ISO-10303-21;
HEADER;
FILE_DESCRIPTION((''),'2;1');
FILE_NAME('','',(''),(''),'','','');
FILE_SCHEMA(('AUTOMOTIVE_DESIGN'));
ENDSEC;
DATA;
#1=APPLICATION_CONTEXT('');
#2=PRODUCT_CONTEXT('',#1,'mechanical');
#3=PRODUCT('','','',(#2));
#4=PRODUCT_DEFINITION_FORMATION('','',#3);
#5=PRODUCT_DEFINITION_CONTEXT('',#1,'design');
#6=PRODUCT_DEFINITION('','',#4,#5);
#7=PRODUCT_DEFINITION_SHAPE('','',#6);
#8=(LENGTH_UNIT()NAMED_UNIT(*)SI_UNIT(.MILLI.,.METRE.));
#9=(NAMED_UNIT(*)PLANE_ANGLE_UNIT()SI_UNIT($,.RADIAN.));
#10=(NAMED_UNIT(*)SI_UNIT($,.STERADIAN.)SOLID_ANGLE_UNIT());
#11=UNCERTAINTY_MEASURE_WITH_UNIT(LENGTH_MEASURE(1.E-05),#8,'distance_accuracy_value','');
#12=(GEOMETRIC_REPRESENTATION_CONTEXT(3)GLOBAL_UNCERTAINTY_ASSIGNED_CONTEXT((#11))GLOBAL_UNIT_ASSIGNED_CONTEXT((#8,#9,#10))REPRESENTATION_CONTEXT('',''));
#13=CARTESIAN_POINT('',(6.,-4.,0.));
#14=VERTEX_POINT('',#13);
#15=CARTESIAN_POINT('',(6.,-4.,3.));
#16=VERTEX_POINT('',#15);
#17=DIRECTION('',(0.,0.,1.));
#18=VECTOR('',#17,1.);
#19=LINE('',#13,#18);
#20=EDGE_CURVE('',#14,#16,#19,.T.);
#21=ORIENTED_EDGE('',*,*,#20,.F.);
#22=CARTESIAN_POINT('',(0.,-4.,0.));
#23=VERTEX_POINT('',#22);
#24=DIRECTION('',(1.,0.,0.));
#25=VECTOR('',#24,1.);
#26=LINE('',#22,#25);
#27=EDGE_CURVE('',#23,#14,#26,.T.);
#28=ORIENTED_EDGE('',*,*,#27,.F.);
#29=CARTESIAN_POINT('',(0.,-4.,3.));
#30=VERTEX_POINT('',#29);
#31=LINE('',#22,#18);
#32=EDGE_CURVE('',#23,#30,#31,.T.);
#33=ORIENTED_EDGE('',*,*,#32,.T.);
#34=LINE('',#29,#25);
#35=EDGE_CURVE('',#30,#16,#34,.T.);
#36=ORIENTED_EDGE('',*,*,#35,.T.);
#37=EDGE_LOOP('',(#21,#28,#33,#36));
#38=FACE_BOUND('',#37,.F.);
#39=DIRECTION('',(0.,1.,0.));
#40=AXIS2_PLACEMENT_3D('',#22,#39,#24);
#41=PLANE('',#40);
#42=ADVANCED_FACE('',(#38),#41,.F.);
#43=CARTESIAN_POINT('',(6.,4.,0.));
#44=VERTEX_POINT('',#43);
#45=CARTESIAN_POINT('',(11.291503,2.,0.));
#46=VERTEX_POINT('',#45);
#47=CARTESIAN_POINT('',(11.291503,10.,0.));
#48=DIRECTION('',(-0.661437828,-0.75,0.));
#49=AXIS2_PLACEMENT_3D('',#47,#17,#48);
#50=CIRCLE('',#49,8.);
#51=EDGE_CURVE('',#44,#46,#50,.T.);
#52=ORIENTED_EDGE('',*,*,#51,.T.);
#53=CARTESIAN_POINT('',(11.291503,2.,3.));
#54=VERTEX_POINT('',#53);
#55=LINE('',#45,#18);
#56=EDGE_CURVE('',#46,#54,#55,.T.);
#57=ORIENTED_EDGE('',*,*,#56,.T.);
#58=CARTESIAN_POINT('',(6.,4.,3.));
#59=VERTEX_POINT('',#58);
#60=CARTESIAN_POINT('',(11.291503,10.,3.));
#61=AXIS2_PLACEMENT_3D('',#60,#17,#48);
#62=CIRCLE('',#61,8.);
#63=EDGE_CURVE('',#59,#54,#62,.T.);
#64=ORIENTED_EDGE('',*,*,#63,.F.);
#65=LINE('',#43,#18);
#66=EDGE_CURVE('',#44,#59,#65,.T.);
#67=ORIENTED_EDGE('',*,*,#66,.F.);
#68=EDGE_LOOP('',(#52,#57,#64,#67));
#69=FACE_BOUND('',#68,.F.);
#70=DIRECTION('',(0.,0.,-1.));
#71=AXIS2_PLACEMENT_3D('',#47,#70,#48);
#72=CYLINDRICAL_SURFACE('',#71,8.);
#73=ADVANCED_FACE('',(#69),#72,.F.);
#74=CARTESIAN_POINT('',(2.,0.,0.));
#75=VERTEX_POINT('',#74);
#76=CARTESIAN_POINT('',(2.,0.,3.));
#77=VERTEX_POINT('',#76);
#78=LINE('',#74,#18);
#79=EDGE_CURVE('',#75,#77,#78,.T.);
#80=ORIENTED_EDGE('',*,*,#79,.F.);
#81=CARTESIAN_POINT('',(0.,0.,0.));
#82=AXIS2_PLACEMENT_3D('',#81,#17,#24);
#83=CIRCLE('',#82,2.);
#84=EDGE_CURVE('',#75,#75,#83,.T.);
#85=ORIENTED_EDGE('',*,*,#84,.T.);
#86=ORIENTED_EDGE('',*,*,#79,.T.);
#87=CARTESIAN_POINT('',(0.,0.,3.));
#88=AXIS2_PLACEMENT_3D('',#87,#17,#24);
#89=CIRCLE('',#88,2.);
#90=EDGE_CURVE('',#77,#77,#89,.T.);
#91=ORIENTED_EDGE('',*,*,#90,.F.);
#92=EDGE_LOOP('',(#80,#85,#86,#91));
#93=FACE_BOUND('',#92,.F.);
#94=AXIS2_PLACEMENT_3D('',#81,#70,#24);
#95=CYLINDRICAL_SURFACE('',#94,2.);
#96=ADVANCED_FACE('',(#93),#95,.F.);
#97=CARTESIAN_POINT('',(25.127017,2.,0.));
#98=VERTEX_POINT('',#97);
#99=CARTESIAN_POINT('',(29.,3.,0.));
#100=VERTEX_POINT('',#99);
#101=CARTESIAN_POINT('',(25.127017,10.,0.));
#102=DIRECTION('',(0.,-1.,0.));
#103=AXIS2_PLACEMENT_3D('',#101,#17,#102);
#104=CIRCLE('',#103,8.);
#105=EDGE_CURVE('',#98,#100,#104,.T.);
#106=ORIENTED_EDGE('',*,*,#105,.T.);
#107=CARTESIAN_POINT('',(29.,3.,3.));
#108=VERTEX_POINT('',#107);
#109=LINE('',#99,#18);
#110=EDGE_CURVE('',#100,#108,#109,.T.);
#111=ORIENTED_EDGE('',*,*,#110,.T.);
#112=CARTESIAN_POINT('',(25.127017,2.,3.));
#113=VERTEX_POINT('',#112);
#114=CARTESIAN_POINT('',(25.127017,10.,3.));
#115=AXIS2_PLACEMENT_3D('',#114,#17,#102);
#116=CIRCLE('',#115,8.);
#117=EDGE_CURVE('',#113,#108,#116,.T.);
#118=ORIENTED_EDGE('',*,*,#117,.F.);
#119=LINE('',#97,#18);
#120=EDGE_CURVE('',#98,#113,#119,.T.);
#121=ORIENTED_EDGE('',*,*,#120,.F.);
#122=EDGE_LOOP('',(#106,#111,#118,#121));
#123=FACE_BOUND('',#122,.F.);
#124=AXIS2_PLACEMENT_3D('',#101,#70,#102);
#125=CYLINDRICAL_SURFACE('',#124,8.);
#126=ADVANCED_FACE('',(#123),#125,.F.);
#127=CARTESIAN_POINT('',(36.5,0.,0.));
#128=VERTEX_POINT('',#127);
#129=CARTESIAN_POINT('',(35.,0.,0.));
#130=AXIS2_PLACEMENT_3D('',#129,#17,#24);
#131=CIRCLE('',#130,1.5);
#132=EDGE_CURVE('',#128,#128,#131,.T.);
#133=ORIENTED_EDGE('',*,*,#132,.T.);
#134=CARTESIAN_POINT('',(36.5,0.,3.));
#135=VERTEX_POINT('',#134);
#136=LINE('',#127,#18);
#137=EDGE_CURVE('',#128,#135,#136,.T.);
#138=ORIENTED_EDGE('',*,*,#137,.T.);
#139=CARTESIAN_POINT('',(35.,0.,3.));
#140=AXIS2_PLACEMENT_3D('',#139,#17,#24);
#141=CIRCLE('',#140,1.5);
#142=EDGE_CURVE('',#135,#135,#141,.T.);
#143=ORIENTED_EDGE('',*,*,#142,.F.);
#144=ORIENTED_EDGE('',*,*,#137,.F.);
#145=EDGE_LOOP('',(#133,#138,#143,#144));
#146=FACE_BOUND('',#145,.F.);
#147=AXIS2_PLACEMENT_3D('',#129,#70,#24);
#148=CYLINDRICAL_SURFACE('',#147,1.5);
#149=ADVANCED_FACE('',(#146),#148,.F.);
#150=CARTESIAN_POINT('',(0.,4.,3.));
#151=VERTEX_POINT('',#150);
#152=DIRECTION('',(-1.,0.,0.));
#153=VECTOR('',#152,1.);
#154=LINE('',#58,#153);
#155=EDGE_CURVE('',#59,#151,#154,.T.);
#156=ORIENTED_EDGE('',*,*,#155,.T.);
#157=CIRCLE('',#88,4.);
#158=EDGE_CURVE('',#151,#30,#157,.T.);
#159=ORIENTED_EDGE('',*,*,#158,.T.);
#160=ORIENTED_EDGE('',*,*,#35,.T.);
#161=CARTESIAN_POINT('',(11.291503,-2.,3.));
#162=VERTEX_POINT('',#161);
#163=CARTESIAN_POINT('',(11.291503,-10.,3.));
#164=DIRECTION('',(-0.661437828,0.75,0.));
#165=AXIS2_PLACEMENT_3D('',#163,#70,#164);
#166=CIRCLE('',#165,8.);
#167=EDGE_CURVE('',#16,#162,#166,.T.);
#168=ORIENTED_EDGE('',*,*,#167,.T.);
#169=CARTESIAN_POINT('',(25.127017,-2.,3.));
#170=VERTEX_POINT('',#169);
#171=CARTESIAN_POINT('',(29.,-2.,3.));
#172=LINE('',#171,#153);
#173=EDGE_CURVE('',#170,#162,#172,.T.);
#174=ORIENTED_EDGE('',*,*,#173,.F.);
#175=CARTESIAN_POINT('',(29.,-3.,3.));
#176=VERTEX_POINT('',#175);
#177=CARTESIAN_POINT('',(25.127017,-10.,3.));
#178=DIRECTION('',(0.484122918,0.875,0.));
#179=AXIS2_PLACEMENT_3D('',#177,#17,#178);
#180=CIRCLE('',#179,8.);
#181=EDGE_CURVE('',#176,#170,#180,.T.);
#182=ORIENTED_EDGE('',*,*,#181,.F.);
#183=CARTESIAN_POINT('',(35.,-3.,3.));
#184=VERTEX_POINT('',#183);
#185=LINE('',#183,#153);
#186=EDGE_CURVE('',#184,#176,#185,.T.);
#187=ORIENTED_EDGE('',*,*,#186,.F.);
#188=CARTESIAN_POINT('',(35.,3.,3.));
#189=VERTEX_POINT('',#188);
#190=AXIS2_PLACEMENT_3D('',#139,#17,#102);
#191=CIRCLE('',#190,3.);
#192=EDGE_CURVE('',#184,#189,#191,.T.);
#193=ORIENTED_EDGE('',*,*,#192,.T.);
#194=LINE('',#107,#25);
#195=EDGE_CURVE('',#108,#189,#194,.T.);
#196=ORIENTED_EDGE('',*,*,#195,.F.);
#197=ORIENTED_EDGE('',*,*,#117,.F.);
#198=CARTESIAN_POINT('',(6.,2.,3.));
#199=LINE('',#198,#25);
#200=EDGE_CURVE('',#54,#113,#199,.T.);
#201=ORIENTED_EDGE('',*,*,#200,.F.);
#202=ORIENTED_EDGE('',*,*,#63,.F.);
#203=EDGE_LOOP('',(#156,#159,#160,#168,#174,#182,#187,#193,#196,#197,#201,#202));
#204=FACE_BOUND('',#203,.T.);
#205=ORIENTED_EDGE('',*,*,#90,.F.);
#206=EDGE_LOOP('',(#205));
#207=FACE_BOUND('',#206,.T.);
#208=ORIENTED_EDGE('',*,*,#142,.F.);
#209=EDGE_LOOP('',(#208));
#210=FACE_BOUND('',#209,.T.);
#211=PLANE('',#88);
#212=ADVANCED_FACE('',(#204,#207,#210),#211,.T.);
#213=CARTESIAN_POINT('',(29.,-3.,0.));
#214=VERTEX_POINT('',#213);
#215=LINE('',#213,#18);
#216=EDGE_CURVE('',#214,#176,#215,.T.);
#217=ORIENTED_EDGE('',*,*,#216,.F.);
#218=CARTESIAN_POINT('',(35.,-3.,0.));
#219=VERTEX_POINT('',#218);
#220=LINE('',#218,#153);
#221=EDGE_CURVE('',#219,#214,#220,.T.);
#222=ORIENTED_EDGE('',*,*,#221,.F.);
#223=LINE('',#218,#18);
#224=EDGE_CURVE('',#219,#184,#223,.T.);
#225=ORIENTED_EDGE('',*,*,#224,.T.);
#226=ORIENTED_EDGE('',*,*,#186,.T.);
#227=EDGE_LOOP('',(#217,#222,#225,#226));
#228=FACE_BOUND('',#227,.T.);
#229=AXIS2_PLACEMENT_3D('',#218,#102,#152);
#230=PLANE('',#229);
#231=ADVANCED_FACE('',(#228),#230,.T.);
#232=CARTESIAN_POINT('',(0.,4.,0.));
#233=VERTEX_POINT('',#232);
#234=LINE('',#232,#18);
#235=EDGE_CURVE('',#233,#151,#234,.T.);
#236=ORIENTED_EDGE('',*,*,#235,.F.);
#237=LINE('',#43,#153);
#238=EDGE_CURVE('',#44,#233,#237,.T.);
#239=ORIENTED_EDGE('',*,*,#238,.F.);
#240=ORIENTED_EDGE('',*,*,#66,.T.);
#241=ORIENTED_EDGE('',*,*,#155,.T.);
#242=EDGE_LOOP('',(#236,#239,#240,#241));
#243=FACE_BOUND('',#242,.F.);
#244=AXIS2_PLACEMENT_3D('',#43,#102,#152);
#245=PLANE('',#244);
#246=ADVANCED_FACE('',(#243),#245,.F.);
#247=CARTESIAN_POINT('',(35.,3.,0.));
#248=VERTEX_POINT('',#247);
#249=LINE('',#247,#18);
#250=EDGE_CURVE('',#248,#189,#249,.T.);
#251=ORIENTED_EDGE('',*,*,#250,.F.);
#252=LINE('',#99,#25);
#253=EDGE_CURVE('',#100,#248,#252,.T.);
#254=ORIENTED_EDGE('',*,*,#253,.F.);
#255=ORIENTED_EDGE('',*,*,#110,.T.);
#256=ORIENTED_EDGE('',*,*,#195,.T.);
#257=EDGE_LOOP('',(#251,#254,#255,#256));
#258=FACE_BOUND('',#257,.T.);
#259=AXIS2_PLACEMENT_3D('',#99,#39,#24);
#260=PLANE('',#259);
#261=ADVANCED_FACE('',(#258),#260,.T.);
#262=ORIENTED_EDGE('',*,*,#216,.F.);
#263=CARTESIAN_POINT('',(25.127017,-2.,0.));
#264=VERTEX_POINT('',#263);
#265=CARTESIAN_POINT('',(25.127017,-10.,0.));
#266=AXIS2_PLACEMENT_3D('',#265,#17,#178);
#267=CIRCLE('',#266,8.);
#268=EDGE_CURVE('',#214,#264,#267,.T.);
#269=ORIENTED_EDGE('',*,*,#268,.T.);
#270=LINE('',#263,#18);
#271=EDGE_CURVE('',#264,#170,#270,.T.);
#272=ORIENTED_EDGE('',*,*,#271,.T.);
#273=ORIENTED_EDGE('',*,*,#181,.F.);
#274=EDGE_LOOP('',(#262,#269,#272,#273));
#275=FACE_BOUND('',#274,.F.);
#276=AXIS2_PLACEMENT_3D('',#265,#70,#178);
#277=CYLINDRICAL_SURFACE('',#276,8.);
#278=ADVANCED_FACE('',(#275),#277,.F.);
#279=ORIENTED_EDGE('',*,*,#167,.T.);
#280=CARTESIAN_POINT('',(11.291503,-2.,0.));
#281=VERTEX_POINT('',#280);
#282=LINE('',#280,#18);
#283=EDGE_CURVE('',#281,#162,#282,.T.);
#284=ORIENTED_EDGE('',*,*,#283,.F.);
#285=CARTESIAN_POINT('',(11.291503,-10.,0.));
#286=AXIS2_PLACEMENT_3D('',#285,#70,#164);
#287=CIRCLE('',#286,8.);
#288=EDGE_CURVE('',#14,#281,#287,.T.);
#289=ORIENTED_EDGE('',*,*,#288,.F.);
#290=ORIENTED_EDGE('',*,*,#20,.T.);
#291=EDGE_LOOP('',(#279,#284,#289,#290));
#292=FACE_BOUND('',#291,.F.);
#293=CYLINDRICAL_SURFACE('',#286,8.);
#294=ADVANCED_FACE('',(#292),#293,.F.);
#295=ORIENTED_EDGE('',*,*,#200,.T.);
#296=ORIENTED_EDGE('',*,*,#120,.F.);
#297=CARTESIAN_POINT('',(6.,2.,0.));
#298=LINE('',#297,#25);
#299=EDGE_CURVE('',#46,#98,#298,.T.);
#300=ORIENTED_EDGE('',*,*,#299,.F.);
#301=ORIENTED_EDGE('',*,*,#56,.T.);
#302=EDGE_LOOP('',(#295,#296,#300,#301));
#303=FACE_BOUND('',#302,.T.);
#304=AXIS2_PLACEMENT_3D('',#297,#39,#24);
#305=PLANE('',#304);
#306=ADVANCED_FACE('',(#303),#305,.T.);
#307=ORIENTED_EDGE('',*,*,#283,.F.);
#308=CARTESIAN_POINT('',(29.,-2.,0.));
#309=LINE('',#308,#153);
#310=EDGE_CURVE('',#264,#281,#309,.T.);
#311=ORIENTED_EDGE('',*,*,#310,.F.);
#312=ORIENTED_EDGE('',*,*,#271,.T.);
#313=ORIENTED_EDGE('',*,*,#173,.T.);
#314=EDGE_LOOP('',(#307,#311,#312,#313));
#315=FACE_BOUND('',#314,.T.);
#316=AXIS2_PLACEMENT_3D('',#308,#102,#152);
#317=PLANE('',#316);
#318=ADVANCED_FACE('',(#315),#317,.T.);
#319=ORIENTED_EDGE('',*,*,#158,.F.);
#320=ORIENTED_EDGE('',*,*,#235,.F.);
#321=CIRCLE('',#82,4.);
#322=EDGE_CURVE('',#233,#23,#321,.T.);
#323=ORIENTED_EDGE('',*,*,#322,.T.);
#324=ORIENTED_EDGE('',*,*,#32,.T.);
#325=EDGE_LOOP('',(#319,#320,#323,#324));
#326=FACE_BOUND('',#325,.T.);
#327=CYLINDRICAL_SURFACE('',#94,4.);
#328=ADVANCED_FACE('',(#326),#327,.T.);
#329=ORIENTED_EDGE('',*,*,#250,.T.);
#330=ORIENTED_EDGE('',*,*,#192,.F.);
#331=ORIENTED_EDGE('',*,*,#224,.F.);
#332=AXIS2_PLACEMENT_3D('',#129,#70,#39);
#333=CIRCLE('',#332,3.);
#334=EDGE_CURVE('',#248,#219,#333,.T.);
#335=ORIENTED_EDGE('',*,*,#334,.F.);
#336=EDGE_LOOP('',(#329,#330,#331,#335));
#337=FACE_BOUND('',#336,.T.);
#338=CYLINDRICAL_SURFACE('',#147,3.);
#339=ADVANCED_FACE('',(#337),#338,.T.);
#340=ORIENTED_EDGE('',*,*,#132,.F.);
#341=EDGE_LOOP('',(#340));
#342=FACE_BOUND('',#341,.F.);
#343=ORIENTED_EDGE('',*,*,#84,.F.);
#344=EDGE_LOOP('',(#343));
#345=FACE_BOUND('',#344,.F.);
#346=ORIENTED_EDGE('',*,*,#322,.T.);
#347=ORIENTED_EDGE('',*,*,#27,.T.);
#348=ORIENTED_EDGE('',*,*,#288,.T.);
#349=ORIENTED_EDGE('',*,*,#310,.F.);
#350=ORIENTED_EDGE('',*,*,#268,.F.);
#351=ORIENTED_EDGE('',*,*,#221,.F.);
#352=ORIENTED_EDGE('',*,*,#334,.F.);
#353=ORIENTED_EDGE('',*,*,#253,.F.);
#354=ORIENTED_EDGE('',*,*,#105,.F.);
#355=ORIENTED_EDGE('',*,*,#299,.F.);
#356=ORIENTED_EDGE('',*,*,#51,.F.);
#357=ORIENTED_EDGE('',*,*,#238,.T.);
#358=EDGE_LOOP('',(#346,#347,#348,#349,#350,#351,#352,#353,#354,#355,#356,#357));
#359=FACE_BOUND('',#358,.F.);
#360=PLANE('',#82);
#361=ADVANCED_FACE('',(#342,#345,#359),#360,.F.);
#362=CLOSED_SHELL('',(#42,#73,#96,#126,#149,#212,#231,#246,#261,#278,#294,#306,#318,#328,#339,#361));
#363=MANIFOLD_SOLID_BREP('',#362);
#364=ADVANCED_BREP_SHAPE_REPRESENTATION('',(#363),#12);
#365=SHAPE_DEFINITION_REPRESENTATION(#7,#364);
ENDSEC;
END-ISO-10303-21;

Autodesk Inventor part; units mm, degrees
ref_plane "YZ Plane" through (0, 0, 0) normal (1, 0, 0) x (0, 1, 0)
ref_plane "XZ Plane" through (0, 0, 0) normal (0, 1, 0) x (-1, 0, 0)
ref_plane "XY Plane" through (0, 0, 0) normal (0, 0, 1) x (1, 0, 0)
sketch "Sketch1" plane through (0, 0, 0) normal (0, 0, 1) x (1, 0, 0)
  circle A0 centre (0, 0) radius 4
  circle A1 centre (0, 0) radius 2
  line L0 (0, -4) -> (6, -4)
  line L1 (6, -4) -> (6, 4)
  line L2 (6, 4) -> (0, 4)
  circle A2 centre (35, 0) radius 1.5
  circle A3 centre (35, 0) radius 3
  line L3 (35, -3) -> (29, -3)
  line L4 (29, -3) -> (29, 3)
  line L5 (29, 3) -> (35, 3)
  line L6 (29, -2) -> (6, -2)
  line L7 (6, 2) -> (29, 2)
  dimension "d0" = 8
  dimension "d1" = 4
  dimension "d8" = 6
  dimension "d9" = 3
  dimension "d10" = 6
  dimension "d11" = 6
  dimension "d12" = 6
extrude "Extrusion1" add sketch "Sketch1" along normal blind 3
fillet "Fillet1" radius 8 1 edges at (6, -2, 1.5)
fillet "Fillet2" radius 8 3 edges at (6, 2, 1.5) (29, 2, 1.5) (29, -2, 1.5)
properties part number "PLEUEL PART 10"
